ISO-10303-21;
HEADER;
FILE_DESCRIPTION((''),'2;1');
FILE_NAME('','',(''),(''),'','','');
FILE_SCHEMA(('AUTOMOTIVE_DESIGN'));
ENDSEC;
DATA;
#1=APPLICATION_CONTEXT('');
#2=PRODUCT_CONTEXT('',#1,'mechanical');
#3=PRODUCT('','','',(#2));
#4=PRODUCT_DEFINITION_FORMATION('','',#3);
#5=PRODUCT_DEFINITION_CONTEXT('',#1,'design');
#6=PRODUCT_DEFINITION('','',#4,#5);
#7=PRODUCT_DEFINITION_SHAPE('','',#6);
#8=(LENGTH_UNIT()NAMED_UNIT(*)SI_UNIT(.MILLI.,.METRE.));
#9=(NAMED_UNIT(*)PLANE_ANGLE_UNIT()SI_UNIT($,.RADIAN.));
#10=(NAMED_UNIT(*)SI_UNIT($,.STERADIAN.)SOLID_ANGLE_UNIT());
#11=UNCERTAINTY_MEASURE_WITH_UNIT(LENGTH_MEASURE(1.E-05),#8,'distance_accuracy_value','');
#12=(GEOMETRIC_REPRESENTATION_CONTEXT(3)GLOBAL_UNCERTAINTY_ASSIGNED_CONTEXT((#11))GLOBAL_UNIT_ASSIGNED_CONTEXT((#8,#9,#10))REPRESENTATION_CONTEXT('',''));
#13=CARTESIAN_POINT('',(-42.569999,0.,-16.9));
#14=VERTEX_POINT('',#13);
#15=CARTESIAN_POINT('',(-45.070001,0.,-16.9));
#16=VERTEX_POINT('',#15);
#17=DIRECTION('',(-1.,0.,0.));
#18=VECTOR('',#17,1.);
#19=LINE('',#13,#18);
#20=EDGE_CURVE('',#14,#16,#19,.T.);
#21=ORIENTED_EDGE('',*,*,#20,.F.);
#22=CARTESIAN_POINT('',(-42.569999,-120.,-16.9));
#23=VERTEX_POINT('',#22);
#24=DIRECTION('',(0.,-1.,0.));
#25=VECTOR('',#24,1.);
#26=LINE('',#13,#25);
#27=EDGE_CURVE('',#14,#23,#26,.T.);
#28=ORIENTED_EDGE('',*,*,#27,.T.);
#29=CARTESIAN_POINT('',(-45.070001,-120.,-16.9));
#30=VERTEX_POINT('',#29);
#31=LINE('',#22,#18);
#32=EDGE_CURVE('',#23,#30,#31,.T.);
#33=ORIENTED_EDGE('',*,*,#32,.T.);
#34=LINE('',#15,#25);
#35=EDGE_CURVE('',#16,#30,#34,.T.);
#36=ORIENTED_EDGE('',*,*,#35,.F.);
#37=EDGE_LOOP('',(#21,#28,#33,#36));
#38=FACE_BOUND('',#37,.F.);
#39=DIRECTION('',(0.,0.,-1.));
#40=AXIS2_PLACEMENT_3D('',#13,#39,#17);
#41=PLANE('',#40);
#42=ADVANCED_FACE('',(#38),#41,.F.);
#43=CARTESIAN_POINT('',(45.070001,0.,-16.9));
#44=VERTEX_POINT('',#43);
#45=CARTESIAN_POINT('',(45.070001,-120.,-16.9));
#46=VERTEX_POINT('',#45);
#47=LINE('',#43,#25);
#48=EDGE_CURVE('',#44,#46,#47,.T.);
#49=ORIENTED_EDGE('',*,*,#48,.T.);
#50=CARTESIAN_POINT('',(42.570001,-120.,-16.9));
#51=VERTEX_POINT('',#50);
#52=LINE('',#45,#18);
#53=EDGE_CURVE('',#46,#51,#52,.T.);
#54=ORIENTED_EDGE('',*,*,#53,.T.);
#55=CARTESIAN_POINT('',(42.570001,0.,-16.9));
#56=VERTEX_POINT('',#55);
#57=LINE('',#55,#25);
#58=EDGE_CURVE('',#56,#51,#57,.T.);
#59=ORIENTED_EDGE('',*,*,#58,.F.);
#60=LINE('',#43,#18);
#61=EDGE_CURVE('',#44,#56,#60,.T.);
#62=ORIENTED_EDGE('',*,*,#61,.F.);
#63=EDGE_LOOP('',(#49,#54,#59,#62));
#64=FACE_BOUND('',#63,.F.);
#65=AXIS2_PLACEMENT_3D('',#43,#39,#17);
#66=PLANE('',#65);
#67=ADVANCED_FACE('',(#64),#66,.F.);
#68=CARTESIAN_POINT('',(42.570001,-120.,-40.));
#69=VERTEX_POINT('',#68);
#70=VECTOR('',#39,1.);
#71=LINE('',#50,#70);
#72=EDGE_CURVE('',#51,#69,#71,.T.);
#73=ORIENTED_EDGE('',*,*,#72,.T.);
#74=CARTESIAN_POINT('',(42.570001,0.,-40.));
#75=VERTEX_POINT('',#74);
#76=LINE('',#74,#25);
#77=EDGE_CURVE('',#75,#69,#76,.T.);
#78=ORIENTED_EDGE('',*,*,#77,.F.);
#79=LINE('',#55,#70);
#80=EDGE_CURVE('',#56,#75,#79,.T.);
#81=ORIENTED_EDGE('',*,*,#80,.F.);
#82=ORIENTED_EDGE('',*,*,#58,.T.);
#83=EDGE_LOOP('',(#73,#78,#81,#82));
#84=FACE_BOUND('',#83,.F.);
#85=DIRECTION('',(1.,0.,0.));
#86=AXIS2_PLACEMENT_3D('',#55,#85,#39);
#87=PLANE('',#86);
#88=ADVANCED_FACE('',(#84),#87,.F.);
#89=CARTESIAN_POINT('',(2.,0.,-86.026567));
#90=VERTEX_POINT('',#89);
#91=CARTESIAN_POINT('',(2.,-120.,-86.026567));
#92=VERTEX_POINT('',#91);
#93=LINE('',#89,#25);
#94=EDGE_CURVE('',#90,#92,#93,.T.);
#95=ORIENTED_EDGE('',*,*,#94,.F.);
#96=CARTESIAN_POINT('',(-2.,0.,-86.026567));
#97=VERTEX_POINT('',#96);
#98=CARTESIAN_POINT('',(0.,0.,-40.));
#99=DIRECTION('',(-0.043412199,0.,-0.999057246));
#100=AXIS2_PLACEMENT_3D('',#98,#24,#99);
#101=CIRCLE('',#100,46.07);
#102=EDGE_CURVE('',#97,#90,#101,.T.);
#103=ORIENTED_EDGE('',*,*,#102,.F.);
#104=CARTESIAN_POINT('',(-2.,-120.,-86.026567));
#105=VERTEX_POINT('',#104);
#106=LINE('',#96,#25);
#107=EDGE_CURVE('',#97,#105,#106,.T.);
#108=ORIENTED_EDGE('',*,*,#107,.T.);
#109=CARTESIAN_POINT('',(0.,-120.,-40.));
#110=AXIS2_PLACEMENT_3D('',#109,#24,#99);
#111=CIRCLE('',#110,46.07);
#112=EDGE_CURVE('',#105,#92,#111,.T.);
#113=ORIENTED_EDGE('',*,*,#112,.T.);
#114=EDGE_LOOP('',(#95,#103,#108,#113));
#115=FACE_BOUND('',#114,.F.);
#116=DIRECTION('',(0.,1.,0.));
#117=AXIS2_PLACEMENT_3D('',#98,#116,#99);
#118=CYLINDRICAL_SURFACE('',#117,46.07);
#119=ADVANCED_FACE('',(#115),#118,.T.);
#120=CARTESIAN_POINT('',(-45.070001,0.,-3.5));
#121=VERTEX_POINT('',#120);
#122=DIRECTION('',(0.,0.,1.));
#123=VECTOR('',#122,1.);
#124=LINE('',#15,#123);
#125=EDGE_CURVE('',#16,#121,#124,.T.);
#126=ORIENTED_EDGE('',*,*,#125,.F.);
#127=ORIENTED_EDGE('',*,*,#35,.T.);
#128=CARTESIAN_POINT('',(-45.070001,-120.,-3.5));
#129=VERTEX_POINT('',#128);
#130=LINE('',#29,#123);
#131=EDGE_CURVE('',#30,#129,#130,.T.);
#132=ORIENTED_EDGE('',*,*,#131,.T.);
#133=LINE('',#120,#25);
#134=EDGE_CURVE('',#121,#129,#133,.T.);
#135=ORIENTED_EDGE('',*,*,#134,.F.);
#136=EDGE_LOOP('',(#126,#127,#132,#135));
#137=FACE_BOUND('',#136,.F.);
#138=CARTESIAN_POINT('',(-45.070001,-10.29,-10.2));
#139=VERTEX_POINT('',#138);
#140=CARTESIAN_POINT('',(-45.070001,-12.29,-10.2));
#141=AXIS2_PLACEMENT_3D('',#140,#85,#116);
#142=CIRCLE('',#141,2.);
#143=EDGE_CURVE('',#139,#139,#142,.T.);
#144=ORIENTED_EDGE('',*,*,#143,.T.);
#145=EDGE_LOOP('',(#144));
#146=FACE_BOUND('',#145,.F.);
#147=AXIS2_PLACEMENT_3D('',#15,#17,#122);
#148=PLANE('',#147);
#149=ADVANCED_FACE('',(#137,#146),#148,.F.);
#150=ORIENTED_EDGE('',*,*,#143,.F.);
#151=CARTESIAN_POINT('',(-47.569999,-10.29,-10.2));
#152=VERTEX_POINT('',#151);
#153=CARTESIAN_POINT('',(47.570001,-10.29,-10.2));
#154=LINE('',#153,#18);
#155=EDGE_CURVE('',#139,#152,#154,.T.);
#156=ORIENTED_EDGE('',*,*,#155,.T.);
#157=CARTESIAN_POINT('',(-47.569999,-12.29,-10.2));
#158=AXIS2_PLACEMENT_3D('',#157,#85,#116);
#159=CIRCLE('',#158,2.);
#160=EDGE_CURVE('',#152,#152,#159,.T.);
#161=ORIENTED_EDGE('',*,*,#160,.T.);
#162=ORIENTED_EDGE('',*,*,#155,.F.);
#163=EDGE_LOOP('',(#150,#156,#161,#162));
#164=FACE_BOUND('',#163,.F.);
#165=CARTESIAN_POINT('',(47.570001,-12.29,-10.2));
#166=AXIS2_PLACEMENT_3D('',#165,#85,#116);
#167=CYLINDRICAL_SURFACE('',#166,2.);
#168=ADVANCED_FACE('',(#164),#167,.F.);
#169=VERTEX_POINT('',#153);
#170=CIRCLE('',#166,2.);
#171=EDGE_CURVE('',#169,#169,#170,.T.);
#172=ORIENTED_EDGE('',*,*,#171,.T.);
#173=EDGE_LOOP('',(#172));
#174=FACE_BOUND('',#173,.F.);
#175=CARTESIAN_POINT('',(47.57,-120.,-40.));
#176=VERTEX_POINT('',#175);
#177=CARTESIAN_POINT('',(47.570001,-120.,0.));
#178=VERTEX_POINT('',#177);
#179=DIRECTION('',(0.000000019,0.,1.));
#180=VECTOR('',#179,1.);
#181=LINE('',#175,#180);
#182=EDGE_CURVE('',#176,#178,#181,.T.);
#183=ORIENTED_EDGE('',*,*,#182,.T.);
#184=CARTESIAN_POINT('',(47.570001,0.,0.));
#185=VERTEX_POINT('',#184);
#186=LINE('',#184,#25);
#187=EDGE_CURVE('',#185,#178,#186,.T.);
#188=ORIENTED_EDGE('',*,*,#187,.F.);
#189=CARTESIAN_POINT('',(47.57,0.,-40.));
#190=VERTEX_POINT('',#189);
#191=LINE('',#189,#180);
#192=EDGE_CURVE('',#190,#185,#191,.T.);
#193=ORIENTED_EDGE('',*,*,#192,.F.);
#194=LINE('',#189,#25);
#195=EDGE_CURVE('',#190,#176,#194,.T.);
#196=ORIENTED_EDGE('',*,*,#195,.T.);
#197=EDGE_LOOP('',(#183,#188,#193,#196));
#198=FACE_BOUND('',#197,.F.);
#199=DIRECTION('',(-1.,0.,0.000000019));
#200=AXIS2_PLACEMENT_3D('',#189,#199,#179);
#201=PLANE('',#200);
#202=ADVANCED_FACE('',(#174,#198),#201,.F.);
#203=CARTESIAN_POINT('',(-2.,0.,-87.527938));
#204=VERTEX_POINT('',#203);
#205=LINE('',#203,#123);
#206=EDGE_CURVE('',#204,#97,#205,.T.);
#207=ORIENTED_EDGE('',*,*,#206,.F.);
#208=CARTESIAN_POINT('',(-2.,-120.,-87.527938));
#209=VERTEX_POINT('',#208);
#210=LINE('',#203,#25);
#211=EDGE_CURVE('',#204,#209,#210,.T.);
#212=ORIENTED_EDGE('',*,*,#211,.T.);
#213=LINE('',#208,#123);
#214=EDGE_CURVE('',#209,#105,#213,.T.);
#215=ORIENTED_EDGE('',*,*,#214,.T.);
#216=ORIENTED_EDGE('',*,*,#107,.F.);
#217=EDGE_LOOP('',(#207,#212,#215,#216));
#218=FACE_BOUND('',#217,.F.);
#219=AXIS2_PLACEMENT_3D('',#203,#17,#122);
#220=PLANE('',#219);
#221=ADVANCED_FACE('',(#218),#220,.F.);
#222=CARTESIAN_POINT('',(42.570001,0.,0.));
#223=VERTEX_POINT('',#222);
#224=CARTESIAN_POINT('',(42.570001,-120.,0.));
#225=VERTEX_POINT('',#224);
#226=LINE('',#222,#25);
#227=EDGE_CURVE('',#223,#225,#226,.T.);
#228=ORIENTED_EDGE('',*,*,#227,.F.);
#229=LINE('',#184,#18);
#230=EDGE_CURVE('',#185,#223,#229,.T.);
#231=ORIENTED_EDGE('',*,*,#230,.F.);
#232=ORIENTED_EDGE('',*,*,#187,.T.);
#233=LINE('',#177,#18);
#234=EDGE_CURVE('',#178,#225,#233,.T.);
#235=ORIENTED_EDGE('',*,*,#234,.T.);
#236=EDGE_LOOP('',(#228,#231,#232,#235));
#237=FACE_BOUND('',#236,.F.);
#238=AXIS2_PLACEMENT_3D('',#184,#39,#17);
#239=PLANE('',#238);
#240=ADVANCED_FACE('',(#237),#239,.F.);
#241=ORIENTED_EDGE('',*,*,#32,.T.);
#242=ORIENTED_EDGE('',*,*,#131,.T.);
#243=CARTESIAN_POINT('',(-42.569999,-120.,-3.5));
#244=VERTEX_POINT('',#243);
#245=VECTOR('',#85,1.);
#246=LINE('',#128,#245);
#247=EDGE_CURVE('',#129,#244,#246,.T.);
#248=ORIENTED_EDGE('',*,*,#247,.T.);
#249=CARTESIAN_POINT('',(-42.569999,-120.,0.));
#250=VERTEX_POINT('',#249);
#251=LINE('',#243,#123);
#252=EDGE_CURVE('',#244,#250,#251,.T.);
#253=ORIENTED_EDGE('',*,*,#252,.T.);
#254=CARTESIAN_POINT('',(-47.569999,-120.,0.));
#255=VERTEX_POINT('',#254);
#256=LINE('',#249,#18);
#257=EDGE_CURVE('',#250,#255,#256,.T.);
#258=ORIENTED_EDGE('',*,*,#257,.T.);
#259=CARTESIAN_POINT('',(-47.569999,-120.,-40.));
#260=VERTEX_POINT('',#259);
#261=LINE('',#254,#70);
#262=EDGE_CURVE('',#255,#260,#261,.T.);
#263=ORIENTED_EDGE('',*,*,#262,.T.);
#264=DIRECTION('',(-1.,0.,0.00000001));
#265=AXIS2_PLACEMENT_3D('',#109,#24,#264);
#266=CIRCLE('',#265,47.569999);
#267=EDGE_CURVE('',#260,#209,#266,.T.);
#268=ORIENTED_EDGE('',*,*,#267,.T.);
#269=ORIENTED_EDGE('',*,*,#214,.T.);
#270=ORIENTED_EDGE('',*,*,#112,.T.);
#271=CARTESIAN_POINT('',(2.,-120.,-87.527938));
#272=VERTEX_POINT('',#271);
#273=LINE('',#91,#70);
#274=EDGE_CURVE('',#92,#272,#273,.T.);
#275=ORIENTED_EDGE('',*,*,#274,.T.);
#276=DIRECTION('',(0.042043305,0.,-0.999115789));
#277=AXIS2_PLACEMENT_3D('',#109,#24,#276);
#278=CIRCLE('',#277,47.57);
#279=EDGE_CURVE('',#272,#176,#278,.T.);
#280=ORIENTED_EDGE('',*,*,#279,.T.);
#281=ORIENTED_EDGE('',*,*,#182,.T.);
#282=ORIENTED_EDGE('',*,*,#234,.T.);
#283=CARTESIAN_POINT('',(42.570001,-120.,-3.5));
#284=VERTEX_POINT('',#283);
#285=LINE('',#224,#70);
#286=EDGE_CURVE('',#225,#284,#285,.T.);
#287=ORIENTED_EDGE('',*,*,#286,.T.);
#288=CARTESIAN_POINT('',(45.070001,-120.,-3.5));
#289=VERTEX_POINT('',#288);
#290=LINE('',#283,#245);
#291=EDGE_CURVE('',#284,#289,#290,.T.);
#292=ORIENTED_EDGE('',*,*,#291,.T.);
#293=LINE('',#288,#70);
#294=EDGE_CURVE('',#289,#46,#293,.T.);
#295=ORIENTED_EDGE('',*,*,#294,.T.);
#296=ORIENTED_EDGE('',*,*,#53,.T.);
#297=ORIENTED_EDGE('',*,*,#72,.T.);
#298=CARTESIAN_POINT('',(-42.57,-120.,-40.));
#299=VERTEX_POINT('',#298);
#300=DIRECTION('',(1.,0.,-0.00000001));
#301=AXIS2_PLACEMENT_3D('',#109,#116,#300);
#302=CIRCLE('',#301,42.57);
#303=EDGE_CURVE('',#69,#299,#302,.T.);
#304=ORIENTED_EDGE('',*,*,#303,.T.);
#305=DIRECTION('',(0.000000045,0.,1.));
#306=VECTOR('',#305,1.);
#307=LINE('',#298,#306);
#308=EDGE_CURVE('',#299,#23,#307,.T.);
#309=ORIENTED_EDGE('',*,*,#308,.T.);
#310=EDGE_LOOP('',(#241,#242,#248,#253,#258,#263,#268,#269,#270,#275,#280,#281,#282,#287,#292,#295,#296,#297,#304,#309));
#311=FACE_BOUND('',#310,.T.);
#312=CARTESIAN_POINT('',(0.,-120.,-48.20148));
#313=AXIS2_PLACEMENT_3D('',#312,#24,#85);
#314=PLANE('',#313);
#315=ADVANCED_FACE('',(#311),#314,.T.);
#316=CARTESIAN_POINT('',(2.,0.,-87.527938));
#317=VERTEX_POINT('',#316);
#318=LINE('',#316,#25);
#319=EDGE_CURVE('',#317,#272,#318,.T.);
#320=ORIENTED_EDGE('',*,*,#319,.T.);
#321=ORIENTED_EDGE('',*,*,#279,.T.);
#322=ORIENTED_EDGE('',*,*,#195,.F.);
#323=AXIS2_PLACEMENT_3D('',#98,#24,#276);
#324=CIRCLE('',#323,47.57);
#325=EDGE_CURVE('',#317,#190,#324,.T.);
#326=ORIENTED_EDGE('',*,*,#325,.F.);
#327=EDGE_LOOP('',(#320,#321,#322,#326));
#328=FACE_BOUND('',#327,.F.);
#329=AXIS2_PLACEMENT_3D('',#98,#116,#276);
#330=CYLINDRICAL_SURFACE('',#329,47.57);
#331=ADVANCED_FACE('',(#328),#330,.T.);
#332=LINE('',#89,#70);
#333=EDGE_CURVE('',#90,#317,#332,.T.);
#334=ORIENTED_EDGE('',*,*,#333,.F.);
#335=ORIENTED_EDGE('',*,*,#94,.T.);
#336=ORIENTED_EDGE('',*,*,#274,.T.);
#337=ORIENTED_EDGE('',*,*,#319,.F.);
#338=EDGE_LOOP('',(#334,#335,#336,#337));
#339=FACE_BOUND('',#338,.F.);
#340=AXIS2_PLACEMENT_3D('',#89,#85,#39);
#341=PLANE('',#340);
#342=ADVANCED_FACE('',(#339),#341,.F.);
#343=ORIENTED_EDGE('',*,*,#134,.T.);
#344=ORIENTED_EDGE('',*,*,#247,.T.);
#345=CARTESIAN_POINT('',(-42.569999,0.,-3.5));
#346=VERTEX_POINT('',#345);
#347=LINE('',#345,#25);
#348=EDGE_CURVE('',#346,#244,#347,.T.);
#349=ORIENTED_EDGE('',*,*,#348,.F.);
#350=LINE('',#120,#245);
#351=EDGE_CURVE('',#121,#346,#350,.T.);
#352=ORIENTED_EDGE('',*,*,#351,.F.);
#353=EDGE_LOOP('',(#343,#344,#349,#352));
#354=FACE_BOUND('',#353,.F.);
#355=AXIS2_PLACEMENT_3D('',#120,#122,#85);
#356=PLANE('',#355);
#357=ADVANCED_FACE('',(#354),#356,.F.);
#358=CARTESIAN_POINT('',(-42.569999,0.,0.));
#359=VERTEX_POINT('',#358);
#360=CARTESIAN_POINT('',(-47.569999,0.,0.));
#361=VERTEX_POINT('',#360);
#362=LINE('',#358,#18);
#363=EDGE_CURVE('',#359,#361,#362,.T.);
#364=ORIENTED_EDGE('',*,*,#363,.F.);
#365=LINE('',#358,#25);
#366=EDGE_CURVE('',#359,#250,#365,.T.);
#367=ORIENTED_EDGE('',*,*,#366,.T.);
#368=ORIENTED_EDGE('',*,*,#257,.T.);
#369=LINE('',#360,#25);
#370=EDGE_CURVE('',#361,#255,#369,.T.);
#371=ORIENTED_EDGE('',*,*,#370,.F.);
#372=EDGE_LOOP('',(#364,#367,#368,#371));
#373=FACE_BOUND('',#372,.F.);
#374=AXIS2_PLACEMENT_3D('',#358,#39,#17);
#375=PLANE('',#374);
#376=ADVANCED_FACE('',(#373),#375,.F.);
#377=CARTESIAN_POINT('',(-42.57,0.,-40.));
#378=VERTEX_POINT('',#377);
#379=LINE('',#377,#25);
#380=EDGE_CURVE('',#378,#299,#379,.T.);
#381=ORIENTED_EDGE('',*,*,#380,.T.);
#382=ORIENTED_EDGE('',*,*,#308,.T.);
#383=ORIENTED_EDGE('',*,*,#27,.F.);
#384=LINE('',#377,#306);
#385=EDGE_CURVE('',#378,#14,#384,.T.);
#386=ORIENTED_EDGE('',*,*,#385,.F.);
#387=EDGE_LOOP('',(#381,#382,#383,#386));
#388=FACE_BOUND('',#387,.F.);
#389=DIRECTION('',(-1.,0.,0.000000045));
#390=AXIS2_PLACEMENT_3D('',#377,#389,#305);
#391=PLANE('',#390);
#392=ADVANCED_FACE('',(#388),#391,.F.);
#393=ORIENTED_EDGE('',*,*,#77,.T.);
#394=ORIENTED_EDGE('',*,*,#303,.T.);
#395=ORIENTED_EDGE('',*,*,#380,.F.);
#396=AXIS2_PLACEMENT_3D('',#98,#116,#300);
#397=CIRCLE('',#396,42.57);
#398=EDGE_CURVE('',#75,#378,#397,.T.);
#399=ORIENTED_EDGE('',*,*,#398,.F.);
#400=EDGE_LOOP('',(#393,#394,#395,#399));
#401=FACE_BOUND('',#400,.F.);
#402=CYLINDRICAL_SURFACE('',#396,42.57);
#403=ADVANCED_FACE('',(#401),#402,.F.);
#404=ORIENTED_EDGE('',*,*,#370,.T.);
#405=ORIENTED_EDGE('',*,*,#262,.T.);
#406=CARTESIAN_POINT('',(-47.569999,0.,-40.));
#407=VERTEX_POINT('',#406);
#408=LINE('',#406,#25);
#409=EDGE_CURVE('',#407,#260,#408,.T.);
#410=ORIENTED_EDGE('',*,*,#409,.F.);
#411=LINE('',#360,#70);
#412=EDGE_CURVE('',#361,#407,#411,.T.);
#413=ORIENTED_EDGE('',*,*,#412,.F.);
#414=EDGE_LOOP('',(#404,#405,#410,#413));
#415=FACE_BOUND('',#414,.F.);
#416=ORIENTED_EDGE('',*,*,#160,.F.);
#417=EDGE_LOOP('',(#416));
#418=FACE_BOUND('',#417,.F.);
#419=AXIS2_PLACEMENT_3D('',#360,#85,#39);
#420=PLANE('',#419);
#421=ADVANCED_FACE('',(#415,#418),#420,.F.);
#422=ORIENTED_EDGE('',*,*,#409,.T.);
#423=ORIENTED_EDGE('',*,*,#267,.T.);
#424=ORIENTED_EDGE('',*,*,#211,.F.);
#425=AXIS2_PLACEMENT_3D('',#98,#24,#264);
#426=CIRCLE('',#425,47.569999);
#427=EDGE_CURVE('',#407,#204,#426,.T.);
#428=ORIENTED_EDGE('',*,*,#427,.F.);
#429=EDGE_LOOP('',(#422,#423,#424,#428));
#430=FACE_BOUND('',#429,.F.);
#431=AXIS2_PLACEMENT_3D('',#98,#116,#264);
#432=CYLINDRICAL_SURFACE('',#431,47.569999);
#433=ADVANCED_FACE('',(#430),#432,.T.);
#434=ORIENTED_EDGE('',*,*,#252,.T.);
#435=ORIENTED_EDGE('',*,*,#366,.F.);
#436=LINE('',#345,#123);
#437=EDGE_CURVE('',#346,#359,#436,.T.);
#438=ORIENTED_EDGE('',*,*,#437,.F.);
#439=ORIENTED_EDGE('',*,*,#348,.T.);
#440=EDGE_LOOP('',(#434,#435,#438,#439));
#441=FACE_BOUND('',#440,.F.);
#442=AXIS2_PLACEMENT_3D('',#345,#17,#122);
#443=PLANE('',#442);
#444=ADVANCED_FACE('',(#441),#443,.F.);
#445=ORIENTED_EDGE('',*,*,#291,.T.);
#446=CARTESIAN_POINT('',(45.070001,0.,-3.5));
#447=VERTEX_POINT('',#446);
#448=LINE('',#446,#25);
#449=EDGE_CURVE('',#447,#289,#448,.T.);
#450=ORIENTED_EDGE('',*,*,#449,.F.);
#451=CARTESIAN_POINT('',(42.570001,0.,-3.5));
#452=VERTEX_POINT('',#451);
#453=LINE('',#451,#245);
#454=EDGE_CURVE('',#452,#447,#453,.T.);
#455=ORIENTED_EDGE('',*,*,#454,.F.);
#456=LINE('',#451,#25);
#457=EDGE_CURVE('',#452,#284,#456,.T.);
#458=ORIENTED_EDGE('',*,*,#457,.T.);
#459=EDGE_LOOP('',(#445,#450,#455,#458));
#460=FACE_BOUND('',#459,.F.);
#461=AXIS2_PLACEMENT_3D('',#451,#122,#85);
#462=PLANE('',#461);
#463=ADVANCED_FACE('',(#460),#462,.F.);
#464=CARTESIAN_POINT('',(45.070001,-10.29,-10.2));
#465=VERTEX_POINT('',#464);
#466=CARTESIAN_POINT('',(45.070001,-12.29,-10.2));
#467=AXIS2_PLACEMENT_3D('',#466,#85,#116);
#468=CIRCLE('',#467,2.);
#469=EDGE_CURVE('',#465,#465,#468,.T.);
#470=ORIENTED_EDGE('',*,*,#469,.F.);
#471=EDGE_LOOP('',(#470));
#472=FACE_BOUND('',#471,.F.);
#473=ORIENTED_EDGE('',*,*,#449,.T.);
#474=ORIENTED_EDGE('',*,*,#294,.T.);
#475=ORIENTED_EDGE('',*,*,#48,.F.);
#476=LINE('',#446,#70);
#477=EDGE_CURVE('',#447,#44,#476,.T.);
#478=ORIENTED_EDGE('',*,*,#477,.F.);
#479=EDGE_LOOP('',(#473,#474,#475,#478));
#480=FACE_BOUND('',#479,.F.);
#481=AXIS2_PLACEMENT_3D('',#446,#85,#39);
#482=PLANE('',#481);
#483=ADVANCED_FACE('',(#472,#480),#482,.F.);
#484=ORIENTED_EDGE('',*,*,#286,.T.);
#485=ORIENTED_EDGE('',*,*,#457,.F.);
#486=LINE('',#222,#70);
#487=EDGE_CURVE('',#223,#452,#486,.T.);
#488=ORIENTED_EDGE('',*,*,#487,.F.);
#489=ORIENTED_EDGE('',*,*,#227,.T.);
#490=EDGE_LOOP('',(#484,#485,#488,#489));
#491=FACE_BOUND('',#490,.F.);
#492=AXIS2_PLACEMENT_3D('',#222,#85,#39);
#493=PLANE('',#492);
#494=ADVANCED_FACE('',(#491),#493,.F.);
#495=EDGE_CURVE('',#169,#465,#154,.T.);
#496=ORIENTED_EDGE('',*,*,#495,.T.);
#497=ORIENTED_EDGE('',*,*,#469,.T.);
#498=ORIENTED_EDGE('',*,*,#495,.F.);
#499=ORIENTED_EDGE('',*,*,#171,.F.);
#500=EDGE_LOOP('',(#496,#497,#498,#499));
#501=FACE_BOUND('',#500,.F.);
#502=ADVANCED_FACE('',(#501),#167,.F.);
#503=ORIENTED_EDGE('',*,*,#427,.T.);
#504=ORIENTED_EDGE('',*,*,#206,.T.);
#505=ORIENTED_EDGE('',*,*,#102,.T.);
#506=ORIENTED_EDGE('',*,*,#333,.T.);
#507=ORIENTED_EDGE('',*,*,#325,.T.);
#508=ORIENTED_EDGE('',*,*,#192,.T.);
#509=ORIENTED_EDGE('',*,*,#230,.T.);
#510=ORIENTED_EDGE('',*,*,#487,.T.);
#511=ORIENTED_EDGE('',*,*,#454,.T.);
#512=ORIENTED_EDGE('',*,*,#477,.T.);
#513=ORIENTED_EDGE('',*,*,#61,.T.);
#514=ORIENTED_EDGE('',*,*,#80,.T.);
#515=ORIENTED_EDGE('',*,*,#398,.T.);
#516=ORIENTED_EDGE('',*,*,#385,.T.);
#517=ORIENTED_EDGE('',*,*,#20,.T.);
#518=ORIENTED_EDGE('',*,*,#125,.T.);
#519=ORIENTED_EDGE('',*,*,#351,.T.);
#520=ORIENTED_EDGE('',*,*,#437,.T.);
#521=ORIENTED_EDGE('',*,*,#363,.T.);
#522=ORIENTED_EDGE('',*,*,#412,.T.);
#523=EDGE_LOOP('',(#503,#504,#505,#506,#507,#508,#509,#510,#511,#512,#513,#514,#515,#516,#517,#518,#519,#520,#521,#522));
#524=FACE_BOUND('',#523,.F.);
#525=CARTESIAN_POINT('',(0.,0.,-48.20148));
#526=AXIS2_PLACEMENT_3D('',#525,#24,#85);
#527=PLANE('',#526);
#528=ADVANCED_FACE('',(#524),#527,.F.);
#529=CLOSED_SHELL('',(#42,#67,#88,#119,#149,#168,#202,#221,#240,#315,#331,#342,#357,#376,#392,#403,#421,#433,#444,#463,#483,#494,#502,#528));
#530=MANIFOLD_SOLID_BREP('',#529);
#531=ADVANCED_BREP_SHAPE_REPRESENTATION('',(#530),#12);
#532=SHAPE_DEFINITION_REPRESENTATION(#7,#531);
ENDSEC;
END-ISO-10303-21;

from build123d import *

# Parameters (mm, degrees)
F1_DEPTH = 120
F2_R     = 2
F3_DEPTH = 95.141


# Not quite as in the source:
# - ends of sketch curves that miss each other by under 0.0002 mm in the source are joined


with BuildPart() as f1:
    # F0 (on Front) → F1 (new body)
    with BuildSketch(Plane.XZ):
        with BuildLine():
            Line((-42.5699986517, 0), (-47.569999482, 0))
            Line((-47.569999482, 0), (-47.569999482, -40))
            ThreePointArc((-47.569999482, -40), (-34.336896153, -72.9223698712), (-2, -87.5279378404))
            Line((-2, -87.5279378404), (-2, -86.0265670688))
            ThreePointArc((-2, -86.0265670688), (0, -86.069999741), (2, -86.0265670688))
            Line((2, -86.0265670688), (2, -87.5279378404))
            ThreePointArc((2, -87.5279378404), (34.336896153, -72.9223698712), (47.569999741, -40))
            Line((47.569999741, -40), (47.570000518, 0))
            Line((47.570000518, 0), (42.570000518, 0))
            Line((42.570000518, 0), (42.570000518, -3.5))
            Line((42.570000518, -3.5), (45.070000518, -3.5))
            Line((45.070000518, -3.5), (45.070000518, -16.9))
            Line((45.070000518, -16.9), (42.570000518, -16.9))
            Line((42.570000518, -16.9), (42.570000518, -40))
            ThreePointArc((42.570000518, -40), (0, -82.5699996948), (-42.5699996948, -40))
            Line((-42.5699996948, -40), (-42.5699986517, -16.9))
            Line((-42.5699986517, -16.9), (-45.070000518, -16.9))
            Line((-45.070000518, -16.9), (-45.070000518, -3.5))
            Line((-45.070000518, -3.5), (-42.5699986517, -3.5))
            Line((-42.5699986517, -3.5), (-42.5699986517, 0))
        make_face()
    extrude(amount=F1_DEPTH)

    # F2 (on face) → F3 (cut, through all)
    with BuildSketch(Plane.YZ.offset(47.570000518)):
        with Locations((-12.29, -10.2)):
            Circle(F2_R)
    extrude(amount=-F3_DEPTH, mode=Mode.SUBTRACT)


solid = f1.part
